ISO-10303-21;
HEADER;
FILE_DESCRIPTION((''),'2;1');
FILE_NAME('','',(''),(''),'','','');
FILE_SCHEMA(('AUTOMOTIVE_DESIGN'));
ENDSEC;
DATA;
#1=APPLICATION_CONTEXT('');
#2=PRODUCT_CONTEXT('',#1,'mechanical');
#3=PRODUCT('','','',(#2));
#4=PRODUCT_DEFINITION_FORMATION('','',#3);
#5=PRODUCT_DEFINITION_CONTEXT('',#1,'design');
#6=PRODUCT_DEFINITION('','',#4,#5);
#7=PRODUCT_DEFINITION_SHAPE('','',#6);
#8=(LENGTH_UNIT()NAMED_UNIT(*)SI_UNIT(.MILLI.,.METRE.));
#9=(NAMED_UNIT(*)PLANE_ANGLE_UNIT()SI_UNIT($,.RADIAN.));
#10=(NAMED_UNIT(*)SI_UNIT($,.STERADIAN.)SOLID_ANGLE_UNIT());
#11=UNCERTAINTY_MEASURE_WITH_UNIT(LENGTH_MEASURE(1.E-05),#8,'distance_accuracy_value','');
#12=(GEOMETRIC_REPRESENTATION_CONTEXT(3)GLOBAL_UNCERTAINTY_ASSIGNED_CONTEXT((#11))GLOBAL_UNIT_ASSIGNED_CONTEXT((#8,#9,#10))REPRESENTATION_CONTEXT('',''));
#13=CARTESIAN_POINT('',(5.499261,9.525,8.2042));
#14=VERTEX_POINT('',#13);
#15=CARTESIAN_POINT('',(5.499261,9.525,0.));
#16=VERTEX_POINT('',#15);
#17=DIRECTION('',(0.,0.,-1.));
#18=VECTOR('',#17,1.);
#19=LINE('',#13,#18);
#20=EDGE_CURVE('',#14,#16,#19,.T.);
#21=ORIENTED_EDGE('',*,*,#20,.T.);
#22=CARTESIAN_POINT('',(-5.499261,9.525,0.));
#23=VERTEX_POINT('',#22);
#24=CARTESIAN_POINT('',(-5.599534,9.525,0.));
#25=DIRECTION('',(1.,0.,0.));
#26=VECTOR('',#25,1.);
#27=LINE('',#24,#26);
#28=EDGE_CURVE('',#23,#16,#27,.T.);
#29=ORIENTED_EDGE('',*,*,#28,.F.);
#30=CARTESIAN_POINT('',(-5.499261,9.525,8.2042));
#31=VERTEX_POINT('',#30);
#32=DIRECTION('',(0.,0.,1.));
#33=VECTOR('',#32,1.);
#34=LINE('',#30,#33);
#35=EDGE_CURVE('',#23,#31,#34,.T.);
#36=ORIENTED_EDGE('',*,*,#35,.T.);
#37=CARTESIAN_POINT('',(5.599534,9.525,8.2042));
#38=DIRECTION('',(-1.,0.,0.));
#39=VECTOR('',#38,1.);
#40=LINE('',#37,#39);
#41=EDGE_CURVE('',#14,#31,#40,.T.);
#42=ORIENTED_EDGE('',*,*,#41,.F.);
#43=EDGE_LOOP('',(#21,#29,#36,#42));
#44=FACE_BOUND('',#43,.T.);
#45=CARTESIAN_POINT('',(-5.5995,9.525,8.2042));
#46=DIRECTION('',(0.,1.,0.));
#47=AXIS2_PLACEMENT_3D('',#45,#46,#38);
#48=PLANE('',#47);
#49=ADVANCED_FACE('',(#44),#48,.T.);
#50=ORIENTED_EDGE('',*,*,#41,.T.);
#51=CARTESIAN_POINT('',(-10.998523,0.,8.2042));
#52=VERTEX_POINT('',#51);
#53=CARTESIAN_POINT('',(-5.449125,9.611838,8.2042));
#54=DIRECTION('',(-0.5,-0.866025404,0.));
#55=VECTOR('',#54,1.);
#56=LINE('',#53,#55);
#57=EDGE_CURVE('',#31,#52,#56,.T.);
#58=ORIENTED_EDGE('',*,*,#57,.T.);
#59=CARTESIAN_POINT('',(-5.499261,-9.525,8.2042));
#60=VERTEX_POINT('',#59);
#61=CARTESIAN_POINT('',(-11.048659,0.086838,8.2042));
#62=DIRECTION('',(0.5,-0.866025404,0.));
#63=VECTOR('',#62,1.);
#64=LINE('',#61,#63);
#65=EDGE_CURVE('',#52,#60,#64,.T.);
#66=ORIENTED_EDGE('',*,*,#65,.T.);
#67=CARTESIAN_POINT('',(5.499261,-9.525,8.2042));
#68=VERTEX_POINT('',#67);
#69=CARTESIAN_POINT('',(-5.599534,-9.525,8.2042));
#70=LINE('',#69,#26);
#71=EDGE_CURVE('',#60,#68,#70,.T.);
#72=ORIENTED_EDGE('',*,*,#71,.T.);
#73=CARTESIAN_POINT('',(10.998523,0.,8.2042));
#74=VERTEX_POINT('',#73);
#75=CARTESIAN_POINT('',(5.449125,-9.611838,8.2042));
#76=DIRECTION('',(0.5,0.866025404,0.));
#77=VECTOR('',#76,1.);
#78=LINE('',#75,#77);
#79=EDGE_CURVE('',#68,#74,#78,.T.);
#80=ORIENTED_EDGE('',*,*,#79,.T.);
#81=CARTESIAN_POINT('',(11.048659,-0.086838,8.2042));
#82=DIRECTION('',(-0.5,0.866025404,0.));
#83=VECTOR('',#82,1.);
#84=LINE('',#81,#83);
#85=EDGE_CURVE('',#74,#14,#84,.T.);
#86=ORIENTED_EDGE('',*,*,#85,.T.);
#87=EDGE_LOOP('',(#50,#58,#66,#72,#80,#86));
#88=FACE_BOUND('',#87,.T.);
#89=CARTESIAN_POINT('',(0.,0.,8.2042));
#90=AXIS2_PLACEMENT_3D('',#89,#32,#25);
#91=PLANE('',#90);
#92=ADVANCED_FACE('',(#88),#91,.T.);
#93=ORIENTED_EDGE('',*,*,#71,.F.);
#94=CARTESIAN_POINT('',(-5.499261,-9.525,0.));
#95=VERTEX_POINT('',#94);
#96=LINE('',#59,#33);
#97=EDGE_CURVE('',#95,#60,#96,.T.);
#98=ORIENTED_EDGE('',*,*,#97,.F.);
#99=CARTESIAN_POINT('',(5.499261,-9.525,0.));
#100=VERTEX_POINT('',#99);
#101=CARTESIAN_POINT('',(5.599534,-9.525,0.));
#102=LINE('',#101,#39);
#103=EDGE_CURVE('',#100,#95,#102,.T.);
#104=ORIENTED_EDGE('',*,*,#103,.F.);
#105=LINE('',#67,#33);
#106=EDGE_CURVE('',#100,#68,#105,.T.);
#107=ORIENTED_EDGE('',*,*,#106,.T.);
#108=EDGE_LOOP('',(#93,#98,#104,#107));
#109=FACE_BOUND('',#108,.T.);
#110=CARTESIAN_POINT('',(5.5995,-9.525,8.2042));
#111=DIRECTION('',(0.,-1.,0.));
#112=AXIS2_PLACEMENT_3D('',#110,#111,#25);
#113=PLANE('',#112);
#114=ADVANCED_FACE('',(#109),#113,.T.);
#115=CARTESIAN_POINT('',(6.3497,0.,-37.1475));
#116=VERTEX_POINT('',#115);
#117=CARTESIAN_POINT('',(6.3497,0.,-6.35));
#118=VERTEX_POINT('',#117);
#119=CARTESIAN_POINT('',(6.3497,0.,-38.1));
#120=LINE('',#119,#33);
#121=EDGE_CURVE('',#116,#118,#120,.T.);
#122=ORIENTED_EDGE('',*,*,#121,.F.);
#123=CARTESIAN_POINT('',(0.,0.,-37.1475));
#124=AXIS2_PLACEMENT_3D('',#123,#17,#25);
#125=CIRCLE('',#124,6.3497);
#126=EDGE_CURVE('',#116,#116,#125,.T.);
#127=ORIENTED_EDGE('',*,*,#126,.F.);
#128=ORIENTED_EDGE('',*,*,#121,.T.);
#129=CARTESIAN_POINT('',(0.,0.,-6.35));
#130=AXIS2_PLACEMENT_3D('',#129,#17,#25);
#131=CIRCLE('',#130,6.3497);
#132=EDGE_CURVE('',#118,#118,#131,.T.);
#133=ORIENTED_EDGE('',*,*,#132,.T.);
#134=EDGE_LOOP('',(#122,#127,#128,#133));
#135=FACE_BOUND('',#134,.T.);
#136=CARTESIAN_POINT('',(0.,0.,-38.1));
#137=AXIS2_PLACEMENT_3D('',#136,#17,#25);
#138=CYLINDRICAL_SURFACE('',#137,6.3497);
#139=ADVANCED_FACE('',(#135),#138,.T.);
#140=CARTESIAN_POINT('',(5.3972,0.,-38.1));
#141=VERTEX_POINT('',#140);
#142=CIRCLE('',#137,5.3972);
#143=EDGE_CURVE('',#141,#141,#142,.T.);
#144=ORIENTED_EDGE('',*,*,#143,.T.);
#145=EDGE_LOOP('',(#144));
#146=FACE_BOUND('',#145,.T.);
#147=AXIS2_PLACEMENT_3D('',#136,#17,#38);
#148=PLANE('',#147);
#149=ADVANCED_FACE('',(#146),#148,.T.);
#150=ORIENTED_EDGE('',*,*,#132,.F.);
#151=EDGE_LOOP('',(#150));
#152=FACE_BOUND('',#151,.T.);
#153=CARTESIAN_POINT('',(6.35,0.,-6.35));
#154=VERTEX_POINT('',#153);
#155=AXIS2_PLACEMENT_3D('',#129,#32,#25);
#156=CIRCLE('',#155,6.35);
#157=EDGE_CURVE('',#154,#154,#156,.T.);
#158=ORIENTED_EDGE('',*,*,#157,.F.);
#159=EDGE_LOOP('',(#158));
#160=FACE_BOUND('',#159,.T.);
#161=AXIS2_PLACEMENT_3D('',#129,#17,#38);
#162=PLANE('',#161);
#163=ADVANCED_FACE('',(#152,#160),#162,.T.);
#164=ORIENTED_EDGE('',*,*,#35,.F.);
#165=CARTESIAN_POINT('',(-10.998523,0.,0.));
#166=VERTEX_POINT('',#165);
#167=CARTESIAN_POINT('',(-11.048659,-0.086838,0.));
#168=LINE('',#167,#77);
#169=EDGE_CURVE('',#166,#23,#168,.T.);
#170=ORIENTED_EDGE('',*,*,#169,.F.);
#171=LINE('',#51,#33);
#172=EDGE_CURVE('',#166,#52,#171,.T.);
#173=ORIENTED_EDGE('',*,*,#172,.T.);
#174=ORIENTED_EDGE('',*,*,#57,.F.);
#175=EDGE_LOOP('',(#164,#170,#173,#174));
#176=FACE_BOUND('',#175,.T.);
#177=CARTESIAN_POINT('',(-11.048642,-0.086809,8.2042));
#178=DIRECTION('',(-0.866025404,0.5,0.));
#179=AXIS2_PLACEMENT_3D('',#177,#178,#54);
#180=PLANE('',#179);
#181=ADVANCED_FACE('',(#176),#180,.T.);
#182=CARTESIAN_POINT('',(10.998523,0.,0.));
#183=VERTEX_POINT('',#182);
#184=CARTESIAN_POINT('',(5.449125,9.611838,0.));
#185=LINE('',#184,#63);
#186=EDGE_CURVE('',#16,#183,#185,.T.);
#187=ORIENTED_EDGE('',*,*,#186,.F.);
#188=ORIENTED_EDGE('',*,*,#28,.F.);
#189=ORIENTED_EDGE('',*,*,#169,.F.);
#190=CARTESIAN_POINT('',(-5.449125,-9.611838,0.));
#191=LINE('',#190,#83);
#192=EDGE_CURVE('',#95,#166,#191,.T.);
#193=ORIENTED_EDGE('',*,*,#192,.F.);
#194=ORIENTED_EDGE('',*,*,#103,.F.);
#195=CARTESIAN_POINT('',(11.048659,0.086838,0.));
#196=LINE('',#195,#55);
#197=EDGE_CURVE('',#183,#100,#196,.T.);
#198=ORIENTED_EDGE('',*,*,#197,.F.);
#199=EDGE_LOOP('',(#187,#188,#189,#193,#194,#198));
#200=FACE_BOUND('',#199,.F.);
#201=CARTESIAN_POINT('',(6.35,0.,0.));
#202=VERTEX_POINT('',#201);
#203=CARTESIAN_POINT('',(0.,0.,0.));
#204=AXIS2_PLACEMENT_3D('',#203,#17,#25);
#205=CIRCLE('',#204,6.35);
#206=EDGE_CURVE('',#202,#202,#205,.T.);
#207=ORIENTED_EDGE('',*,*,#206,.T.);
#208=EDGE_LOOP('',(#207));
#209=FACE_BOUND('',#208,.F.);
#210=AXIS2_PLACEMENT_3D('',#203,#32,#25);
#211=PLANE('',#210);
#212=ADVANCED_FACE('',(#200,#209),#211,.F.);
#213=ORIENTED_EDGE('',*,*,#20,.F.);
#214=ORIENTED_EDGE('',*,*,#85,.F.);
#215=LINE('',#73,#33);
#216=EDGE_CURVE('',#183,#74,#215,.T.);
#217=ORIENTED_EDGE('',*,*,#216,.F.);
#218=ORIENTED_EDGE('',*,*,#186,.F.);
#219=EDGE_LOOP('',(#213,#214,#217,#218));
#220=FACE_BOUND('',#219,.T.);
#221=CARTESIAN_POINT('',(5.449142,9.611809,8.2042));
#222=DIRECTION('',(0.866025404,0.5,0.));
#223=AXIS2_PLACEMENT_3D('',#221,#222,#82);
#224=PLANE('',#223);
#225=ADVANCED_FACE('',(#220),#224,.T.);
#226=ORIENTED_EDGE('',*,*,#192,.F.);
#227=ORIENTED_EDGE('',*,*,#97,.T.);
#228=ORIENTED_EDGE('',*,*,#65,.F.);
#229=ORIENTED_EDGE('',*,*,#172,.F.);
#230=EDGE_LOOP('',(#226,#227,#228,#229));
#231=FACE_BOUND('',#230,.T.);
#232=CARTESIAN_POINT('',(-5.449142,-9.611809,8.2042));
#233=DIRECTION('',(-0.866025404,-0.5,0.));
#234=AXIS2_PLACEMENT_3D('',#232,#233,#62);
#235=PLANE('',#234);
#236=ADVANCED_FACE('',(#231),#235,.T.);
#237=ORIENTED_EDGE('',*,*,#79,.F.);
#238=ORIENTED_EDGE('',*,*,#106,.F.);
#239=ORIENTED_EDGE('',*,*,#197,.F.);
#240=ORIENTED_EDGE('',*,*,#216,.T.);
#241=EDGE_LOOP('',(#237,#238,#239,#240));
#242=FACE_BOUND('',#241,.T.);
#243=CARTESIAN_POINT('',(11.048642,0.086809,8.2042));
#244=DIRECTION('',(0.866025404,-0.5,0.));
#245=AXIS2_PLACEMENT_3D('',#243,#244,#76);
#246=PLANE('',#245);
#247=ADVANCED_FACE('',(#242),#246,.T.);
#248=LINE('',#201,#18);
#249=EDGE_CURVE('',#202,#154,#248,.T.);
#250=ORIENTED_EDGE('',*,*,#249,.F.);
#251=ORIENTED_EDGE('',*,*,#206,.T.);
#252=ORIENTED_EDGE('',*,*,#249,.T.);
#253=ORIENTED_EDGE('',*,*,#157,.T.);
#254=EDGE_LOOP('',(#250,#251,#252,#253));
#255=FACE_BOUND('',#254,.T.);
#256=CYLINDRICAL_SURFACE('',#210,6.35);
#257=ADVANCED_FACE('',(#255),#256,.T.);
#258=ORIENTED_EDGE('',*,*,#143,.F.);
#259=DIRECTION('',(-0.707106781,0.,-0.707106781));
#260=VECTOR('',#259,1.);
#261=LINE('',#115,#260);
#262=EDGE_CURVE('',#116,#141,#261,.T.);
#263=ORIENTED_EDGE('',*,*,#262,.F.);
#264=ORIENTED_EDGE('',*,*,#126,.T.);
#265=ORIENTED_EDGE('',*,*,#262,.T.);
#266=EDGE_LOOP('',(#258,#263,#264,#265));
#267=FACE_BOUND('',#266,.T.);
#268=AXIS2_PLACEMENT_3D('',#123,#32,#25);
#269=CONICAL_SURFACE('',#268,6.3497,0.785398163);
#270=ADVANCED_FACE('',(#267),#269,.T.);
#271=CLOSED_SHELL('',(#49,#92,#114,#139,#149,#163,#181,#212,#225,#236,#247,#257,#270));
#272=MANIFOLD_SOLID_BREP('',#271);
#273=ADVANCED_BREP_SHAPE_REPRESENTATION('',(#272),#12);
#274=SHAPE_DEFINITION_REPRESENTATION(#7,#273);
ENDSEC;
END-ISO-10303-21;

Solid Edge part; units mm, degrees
sketch "Sketch1" plane through (0, 0, 0) normal (0, 0, 1) x (1, 0, 0)
  circle A0 centre (0, 0) radius 11.049
  dimension "D1" = 22.098
extrude "Protrusion1" add sketch "Sketch1" along normal blind 8.2042
sketch "Sketch2" plane through (0, 0, 0) normal (0, 0, -1) x (1, 0, 0)
  circle A0 centre (0, 0) radius 6.35
extrude "Protrusion2" add sketch "Sketch2" along normal blind 38.1
sketch "Sketch3" plane through (0, 0, -38.1) normal (0, 0, -1) x (1, 0, 0)
  circle A0 centre (0, 0) radius 6.3497
extrude "Cutout1" cut sketch "Sketch3" against normal blind 31.75 flip side to cut
chamfer "Chamfer_1" distance 0.9525 angle 45 1 edges at (-6.3497, 0, -38.1)
sketch "Sketch4" plane through (0, 0, 8.2042) normal (0, 0, 1) x (1, 0, 0)
  line L0 (-5.5995, 9.525) -> (5.5995, 9.525)
  dimension "D1" = 19.05
extrude "Cutout2" cut sketch "Sketch4" against normal up to next material side at (0, 9.575, 8.2042)
pattern_circular "Pattern1" count 6 over 360 about axis through (0, 0, 8.2042) along (0, 0, 1) of "Cutout2"
properties part number "24107431"
